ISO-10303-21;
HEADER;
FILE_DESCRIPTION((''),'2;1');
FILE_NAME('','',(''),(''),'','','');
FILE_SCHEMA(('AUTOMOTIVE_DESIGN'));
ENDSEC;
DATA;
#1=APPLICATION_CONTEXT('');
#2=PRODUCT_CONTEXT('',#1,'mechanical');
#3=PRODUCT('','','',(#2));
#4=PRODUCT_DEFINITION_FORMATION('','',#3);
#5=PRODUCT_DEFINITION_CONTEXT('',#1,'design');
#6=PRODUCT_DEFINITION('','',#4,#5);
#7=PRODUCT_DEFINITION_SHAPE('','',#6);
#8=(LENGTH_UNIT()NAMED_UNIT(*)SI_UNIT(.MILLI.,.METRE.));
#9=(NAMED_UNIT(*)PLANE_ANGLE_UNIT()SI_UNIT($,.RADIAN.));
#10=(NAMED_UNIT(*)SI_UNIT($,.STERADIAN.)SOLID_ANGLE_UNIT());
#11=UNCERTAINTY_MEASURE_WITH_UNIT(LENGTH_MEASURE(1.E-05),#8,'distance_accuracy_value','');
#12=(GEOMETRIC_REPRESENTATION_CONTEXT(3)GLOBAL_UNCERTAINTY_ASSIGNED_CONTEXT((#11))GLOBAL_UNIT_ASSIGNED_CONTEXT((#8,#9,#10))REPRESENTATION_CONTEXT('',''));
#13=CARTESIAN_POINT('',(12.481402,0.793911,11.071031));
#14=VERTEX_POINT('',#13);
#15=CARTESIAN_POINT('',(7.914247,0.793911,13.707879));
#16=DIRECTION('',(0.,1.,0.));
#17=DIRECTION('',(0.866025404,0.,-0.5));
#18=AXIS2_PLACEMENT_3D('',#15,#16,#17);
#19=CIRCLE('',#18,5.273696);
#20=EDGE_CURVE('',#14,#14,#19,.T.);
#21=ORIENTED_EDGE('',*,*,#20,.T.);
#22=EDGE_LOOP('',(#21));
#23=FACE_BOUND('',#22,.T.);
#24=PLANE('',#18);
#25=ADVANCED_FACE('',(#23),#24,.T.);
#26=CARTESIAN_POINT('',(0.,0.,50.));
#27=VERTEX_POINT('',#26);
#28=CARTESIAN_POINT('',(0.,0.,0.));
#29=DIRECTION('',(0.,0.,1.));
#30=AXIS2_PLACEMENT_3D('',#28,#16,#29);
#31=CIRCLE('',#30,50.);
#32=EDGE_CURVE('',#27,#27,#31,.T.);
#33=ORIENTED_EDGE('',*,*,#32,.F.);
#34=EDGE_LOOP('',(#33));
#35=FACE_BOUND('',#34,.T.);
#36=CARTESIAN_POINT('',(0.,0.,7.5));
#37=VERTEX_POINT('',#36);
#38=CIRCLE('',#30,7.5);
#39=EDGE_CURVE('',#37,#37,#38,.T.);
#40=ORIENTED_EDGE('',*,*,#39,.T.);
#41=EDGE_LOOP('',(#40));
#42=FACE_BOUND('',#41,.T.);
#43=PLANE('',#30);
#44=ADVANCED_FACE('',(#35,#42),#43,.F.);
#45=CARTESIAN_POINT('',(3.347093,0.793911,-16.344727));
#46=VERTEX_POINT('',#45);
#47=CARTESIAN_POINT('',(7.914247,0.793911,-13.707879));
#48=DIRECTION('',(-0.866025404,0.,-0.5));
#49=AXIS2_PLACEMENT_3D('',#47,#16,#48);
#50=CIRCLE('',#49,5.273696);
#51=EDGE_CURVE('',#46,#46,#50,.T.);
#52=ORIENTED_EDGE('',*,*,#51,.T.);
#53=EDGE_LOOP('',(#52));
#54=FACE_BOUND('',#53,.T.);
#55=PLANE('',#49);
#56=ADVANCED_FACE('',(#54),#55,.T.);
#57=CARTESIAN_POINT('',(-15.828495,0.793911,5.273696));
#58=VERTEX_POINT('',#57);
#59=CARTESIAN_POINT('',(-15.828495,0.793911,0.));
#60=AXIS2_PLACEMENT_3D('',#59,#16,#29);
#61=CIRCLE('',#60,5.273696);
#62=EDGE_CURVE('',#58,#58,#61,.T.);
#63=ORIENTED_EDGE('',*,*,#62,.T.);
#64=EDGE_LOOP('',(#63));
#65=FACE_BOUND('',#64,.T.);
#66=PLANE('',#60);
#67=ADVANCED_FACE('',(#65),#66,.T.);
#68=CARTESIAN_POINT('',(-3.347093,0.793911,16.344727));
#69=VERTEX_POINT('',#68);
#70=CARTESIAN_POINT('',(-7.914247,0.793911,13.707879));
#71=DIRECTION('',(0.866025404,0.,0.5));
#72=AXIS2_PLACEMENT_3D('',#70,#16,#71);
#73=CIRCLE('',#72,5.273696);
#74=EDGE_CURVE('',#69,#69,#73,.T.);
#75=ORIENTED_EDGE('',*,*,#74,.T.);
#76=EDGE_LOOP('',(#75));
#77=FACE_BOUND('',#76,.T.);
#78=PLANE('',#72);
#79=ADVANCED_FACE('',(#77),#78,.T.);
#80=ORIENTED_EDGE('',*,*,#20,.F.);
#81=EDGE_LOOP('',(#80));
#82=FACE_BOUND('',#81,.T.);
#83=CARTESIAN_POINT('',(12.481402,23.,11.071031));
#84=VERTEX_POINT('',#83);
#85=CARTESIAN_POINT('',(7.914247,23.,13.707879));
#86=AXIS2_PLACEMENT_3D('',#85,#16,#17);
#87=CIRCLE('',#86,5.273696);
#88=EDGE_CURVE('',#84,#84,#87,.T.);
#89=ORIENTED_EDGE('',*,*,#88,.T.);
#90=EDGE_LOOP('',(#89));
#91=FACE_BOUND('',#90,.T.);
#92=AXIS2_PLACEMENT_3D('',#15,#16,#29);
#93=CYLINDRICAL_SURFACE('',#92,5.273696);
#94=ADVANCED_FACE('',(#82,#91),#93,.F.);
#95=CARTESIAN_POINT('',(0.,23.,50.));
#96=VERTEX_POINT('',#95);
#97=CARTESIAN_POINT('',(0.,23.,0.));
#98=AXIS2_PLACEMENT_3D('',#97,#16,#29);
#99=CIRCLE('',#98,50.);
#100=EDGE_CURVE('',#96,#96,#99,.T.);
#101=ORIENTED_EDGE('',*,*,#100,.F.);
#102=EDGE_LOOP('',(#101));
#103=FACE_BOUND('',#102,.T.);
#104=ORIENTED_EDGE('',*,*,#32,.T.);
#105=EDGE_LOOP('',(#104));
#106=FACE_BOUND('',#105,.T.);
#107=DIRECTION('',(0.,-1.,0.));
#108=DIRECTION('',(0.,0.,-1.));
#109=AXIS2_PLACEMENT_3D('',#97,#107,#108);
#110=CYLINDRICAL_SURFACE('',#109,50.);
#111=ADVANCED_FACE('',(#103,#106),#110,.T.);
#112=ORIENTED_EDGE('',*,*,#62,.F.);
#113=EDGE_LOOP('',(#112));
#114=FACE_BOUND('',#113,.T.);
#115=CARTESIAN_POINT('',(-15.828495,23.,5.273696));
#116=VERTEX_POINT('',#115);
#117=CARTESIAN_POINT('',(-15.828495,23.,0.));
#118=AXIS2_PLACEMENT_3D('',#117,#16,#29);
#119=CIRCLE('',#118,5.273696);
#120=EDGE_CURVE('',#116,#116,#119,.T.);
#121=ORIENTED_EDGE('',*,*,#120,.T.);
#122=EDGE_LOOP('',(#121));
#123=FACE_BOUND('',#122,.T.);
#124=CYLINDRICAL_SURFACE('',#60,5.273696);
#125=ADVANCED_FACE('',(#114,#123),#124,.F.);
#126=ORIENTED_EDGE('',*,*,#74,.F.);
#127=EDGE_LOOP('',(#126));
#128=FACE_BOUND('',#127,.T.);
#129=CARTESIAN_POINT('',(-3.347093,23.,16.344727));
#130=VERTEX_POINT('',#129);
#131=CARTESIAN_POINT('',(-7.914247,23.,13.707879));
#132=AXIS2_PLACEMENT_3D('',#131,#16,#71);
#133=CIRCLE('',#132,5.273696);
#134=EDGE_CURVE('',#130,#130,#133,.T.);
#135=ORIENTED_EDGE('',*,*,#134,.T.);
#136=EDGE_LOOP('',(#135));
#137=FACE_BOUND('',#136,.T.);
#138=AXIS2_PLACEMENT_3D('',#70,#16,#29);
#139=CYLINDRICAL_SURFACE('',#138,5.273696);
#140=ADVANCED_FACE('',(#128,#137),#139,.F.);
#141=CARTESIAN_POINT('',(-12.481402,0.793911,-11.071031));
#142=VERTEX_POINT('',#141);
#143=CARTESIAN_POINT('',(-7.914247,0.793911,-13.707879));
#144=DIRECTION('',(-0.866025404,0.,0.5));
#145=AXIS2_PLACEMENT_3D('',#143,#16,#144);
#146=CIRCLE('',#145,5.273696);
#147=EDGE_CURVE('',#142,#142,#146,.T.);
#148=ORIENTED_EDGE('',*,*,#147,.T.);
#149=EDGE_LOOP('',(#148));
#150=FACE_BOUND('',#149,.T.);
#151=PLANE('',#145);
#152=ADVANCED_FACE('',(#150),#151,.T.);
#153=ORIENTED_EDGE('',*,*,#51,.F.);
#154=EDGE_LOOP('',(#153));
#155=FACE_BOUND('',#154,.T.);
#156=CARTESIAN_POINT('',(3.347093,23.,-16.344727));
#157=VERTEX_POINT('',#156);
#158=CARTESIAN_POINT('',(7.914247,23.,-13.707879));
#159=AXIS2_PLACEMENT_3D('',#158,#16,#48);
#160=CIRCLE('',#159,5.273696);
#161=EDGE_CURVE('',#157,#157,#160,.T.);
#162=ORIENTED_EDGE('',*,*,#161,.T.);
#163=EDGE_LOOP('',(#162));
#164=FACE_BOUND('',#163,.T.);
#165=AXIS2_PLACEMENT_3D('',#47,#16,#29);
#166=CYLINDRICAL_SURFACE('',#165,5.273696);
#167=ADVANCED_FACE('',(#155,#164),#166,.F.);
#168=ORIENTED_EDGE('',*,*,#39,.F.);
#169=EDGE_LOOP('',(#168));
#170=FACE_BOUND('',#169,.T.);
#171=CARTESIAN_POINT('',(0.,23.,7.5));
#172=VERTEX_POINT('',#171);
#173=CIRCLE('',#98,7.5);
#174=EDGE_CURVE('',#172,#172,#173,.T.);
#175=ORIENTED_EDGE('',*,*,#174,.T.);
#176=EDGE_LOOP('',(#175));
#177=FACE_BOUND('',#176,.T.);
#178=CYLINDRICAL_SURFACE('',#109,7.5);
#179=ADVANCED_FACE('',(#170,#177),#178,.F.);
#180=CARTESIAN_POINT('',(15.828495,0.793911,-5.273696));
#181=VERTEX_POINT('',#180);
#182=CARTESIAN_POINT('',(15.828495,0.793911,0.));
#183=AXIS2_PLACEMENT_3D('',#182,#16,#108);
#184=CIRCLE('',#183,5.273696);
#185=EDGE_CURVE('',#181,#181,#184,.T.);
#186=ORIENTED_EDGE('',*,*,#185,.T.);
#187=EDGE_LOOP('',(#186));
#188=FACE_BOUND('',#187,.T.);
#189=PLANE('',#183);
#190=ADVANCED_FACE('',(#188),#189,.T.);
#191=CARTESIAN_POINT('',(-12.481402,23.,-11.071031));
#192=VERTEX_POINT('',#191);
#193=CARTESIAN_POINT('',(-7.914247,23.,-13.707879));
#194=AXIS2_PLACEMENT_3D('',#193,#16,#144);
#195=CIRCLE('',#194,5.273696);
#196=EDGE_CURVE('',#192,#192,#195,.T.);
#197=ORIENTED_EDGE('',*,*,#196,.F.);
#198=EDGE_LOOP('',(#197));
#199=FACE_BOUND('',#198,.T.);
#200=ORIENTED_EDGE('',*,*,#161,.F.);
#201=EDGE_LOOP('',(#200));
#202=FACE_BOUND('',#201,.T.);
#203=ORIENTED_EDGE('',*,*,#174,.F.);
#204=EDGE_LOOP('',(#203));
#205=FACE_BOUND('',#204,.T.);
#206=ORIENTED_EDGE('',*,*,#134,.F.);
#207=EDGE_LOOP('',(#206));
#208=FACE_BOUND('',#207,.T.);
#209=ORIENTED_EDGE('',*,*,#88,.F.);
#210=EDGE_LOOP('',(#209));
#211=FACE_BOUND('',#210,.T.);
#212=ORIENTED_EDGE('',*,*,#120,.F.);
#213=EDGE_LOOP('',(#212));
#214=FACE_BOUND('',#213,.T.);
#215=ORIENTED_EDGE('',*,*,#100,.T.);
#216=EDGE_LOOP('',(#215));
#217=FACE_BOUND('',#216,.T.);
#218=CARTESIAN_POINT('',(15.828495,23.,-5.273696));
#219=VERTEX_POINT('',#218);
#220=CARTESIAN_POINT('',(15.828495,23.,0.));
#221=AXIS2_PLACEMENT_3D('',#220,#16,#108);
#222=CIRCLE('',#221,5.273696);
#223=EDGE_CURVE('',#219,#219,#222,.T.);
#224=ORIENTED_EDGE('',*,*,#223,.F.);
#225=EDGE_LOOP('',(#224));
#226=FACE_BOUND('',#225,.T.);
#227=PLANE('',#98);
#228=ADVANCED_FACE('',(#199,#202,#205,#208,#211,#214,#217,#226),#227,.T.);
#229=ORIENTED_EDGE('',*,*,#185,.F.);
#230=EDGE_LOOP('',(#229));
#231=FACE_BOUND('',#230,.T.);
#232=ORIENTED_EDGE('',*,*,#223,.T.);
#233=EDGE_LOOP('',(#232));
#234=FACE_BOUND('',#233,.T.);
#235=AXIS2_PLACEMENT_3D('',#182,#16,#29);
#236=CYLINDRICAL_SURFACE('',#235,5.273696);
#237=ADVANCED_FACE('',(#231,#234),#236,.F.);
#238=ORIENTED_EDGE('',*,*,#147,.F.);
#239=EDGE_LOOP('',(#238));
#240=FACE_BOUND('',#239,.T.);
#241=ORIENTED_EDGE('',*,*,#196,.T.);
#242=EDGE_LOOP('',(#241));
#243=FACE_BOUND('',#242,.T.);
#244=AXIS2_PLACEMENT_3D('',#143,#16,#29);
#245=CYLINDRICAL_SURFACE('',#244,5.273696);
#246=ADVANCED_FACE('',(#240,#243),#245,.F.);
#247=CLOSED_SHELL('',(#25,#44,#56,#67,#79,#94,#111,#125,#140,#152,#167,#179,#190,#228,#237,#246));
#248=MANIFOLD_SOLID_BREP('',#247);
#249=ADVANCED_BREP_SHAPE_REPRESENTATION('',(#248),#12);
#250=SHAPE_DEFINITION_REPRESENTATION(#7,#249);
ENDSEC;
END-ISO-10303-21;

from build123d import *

# Parameters (mm, degrees)
SKETCH1_R           = 50
BOSS_EXTRUDE1_DEPTH = 23
SKETCH2_R           = 7.5
CUT_EXTRUDE1_DEPTH  = 75.35724578
SKETCH3_R           = 5.273696223
CUT_EXTRUDE2_DEPTH  = 22.206088794
CIRPATTERN1_COUNT   = 6


with BuildPart() as part:
    # Sketch1 → Boss-Extrude1 (new body)
    with BuildSketch(Plane(origin=(0, 0, 0), x_dir=(1, 0, 0), z_dir=(0, 1, 0))):
        Circle(SKETCH1_R)
    extrude(amount=BOSS_EXTRUDE1_DEPTH)

    # Sketch2 → Cut-Extrude1 (cut, through all)
    with BuildSketch(Plane(origin=(0, 0, 0), x_dir=(1, 0, 0), z_dir=(0, 1, 0))):
        Circle(SKETCH2_R)
    extrude(amount=CUT_EXTRUDE1_DEPTH, mode=Mode.SUBTRACT)

    # Sketch3 → Cut-Extrude2 (cut)
    with BuildSketch(Plane(origin=(0, 23, 0), x_dir=(1, 0, 0), z_dir=(0, 1, 0))):
        with Locations((-15.828494859, 0)):
            Circle(SKETCH3_R)
    cut_extrude2 = extrude(amount=-CUT_EXTRUDE2_DEPTH, mode=Mode.SUBTRACT)

    # CirPattern1: Cut-Extrude2 ×6 about axis
    cirpattern1_axis = Axis((0, 0, 0), (0, 1, 0))
    for i in range(1, CIRPATTERN1_COUNT):
        add(cut_extrude2.rotate(cirpattern1_axis, i * 360 / CIRPATTERN1_COUNT), mode=Mode.SUBTRACT)


solid = part.part
